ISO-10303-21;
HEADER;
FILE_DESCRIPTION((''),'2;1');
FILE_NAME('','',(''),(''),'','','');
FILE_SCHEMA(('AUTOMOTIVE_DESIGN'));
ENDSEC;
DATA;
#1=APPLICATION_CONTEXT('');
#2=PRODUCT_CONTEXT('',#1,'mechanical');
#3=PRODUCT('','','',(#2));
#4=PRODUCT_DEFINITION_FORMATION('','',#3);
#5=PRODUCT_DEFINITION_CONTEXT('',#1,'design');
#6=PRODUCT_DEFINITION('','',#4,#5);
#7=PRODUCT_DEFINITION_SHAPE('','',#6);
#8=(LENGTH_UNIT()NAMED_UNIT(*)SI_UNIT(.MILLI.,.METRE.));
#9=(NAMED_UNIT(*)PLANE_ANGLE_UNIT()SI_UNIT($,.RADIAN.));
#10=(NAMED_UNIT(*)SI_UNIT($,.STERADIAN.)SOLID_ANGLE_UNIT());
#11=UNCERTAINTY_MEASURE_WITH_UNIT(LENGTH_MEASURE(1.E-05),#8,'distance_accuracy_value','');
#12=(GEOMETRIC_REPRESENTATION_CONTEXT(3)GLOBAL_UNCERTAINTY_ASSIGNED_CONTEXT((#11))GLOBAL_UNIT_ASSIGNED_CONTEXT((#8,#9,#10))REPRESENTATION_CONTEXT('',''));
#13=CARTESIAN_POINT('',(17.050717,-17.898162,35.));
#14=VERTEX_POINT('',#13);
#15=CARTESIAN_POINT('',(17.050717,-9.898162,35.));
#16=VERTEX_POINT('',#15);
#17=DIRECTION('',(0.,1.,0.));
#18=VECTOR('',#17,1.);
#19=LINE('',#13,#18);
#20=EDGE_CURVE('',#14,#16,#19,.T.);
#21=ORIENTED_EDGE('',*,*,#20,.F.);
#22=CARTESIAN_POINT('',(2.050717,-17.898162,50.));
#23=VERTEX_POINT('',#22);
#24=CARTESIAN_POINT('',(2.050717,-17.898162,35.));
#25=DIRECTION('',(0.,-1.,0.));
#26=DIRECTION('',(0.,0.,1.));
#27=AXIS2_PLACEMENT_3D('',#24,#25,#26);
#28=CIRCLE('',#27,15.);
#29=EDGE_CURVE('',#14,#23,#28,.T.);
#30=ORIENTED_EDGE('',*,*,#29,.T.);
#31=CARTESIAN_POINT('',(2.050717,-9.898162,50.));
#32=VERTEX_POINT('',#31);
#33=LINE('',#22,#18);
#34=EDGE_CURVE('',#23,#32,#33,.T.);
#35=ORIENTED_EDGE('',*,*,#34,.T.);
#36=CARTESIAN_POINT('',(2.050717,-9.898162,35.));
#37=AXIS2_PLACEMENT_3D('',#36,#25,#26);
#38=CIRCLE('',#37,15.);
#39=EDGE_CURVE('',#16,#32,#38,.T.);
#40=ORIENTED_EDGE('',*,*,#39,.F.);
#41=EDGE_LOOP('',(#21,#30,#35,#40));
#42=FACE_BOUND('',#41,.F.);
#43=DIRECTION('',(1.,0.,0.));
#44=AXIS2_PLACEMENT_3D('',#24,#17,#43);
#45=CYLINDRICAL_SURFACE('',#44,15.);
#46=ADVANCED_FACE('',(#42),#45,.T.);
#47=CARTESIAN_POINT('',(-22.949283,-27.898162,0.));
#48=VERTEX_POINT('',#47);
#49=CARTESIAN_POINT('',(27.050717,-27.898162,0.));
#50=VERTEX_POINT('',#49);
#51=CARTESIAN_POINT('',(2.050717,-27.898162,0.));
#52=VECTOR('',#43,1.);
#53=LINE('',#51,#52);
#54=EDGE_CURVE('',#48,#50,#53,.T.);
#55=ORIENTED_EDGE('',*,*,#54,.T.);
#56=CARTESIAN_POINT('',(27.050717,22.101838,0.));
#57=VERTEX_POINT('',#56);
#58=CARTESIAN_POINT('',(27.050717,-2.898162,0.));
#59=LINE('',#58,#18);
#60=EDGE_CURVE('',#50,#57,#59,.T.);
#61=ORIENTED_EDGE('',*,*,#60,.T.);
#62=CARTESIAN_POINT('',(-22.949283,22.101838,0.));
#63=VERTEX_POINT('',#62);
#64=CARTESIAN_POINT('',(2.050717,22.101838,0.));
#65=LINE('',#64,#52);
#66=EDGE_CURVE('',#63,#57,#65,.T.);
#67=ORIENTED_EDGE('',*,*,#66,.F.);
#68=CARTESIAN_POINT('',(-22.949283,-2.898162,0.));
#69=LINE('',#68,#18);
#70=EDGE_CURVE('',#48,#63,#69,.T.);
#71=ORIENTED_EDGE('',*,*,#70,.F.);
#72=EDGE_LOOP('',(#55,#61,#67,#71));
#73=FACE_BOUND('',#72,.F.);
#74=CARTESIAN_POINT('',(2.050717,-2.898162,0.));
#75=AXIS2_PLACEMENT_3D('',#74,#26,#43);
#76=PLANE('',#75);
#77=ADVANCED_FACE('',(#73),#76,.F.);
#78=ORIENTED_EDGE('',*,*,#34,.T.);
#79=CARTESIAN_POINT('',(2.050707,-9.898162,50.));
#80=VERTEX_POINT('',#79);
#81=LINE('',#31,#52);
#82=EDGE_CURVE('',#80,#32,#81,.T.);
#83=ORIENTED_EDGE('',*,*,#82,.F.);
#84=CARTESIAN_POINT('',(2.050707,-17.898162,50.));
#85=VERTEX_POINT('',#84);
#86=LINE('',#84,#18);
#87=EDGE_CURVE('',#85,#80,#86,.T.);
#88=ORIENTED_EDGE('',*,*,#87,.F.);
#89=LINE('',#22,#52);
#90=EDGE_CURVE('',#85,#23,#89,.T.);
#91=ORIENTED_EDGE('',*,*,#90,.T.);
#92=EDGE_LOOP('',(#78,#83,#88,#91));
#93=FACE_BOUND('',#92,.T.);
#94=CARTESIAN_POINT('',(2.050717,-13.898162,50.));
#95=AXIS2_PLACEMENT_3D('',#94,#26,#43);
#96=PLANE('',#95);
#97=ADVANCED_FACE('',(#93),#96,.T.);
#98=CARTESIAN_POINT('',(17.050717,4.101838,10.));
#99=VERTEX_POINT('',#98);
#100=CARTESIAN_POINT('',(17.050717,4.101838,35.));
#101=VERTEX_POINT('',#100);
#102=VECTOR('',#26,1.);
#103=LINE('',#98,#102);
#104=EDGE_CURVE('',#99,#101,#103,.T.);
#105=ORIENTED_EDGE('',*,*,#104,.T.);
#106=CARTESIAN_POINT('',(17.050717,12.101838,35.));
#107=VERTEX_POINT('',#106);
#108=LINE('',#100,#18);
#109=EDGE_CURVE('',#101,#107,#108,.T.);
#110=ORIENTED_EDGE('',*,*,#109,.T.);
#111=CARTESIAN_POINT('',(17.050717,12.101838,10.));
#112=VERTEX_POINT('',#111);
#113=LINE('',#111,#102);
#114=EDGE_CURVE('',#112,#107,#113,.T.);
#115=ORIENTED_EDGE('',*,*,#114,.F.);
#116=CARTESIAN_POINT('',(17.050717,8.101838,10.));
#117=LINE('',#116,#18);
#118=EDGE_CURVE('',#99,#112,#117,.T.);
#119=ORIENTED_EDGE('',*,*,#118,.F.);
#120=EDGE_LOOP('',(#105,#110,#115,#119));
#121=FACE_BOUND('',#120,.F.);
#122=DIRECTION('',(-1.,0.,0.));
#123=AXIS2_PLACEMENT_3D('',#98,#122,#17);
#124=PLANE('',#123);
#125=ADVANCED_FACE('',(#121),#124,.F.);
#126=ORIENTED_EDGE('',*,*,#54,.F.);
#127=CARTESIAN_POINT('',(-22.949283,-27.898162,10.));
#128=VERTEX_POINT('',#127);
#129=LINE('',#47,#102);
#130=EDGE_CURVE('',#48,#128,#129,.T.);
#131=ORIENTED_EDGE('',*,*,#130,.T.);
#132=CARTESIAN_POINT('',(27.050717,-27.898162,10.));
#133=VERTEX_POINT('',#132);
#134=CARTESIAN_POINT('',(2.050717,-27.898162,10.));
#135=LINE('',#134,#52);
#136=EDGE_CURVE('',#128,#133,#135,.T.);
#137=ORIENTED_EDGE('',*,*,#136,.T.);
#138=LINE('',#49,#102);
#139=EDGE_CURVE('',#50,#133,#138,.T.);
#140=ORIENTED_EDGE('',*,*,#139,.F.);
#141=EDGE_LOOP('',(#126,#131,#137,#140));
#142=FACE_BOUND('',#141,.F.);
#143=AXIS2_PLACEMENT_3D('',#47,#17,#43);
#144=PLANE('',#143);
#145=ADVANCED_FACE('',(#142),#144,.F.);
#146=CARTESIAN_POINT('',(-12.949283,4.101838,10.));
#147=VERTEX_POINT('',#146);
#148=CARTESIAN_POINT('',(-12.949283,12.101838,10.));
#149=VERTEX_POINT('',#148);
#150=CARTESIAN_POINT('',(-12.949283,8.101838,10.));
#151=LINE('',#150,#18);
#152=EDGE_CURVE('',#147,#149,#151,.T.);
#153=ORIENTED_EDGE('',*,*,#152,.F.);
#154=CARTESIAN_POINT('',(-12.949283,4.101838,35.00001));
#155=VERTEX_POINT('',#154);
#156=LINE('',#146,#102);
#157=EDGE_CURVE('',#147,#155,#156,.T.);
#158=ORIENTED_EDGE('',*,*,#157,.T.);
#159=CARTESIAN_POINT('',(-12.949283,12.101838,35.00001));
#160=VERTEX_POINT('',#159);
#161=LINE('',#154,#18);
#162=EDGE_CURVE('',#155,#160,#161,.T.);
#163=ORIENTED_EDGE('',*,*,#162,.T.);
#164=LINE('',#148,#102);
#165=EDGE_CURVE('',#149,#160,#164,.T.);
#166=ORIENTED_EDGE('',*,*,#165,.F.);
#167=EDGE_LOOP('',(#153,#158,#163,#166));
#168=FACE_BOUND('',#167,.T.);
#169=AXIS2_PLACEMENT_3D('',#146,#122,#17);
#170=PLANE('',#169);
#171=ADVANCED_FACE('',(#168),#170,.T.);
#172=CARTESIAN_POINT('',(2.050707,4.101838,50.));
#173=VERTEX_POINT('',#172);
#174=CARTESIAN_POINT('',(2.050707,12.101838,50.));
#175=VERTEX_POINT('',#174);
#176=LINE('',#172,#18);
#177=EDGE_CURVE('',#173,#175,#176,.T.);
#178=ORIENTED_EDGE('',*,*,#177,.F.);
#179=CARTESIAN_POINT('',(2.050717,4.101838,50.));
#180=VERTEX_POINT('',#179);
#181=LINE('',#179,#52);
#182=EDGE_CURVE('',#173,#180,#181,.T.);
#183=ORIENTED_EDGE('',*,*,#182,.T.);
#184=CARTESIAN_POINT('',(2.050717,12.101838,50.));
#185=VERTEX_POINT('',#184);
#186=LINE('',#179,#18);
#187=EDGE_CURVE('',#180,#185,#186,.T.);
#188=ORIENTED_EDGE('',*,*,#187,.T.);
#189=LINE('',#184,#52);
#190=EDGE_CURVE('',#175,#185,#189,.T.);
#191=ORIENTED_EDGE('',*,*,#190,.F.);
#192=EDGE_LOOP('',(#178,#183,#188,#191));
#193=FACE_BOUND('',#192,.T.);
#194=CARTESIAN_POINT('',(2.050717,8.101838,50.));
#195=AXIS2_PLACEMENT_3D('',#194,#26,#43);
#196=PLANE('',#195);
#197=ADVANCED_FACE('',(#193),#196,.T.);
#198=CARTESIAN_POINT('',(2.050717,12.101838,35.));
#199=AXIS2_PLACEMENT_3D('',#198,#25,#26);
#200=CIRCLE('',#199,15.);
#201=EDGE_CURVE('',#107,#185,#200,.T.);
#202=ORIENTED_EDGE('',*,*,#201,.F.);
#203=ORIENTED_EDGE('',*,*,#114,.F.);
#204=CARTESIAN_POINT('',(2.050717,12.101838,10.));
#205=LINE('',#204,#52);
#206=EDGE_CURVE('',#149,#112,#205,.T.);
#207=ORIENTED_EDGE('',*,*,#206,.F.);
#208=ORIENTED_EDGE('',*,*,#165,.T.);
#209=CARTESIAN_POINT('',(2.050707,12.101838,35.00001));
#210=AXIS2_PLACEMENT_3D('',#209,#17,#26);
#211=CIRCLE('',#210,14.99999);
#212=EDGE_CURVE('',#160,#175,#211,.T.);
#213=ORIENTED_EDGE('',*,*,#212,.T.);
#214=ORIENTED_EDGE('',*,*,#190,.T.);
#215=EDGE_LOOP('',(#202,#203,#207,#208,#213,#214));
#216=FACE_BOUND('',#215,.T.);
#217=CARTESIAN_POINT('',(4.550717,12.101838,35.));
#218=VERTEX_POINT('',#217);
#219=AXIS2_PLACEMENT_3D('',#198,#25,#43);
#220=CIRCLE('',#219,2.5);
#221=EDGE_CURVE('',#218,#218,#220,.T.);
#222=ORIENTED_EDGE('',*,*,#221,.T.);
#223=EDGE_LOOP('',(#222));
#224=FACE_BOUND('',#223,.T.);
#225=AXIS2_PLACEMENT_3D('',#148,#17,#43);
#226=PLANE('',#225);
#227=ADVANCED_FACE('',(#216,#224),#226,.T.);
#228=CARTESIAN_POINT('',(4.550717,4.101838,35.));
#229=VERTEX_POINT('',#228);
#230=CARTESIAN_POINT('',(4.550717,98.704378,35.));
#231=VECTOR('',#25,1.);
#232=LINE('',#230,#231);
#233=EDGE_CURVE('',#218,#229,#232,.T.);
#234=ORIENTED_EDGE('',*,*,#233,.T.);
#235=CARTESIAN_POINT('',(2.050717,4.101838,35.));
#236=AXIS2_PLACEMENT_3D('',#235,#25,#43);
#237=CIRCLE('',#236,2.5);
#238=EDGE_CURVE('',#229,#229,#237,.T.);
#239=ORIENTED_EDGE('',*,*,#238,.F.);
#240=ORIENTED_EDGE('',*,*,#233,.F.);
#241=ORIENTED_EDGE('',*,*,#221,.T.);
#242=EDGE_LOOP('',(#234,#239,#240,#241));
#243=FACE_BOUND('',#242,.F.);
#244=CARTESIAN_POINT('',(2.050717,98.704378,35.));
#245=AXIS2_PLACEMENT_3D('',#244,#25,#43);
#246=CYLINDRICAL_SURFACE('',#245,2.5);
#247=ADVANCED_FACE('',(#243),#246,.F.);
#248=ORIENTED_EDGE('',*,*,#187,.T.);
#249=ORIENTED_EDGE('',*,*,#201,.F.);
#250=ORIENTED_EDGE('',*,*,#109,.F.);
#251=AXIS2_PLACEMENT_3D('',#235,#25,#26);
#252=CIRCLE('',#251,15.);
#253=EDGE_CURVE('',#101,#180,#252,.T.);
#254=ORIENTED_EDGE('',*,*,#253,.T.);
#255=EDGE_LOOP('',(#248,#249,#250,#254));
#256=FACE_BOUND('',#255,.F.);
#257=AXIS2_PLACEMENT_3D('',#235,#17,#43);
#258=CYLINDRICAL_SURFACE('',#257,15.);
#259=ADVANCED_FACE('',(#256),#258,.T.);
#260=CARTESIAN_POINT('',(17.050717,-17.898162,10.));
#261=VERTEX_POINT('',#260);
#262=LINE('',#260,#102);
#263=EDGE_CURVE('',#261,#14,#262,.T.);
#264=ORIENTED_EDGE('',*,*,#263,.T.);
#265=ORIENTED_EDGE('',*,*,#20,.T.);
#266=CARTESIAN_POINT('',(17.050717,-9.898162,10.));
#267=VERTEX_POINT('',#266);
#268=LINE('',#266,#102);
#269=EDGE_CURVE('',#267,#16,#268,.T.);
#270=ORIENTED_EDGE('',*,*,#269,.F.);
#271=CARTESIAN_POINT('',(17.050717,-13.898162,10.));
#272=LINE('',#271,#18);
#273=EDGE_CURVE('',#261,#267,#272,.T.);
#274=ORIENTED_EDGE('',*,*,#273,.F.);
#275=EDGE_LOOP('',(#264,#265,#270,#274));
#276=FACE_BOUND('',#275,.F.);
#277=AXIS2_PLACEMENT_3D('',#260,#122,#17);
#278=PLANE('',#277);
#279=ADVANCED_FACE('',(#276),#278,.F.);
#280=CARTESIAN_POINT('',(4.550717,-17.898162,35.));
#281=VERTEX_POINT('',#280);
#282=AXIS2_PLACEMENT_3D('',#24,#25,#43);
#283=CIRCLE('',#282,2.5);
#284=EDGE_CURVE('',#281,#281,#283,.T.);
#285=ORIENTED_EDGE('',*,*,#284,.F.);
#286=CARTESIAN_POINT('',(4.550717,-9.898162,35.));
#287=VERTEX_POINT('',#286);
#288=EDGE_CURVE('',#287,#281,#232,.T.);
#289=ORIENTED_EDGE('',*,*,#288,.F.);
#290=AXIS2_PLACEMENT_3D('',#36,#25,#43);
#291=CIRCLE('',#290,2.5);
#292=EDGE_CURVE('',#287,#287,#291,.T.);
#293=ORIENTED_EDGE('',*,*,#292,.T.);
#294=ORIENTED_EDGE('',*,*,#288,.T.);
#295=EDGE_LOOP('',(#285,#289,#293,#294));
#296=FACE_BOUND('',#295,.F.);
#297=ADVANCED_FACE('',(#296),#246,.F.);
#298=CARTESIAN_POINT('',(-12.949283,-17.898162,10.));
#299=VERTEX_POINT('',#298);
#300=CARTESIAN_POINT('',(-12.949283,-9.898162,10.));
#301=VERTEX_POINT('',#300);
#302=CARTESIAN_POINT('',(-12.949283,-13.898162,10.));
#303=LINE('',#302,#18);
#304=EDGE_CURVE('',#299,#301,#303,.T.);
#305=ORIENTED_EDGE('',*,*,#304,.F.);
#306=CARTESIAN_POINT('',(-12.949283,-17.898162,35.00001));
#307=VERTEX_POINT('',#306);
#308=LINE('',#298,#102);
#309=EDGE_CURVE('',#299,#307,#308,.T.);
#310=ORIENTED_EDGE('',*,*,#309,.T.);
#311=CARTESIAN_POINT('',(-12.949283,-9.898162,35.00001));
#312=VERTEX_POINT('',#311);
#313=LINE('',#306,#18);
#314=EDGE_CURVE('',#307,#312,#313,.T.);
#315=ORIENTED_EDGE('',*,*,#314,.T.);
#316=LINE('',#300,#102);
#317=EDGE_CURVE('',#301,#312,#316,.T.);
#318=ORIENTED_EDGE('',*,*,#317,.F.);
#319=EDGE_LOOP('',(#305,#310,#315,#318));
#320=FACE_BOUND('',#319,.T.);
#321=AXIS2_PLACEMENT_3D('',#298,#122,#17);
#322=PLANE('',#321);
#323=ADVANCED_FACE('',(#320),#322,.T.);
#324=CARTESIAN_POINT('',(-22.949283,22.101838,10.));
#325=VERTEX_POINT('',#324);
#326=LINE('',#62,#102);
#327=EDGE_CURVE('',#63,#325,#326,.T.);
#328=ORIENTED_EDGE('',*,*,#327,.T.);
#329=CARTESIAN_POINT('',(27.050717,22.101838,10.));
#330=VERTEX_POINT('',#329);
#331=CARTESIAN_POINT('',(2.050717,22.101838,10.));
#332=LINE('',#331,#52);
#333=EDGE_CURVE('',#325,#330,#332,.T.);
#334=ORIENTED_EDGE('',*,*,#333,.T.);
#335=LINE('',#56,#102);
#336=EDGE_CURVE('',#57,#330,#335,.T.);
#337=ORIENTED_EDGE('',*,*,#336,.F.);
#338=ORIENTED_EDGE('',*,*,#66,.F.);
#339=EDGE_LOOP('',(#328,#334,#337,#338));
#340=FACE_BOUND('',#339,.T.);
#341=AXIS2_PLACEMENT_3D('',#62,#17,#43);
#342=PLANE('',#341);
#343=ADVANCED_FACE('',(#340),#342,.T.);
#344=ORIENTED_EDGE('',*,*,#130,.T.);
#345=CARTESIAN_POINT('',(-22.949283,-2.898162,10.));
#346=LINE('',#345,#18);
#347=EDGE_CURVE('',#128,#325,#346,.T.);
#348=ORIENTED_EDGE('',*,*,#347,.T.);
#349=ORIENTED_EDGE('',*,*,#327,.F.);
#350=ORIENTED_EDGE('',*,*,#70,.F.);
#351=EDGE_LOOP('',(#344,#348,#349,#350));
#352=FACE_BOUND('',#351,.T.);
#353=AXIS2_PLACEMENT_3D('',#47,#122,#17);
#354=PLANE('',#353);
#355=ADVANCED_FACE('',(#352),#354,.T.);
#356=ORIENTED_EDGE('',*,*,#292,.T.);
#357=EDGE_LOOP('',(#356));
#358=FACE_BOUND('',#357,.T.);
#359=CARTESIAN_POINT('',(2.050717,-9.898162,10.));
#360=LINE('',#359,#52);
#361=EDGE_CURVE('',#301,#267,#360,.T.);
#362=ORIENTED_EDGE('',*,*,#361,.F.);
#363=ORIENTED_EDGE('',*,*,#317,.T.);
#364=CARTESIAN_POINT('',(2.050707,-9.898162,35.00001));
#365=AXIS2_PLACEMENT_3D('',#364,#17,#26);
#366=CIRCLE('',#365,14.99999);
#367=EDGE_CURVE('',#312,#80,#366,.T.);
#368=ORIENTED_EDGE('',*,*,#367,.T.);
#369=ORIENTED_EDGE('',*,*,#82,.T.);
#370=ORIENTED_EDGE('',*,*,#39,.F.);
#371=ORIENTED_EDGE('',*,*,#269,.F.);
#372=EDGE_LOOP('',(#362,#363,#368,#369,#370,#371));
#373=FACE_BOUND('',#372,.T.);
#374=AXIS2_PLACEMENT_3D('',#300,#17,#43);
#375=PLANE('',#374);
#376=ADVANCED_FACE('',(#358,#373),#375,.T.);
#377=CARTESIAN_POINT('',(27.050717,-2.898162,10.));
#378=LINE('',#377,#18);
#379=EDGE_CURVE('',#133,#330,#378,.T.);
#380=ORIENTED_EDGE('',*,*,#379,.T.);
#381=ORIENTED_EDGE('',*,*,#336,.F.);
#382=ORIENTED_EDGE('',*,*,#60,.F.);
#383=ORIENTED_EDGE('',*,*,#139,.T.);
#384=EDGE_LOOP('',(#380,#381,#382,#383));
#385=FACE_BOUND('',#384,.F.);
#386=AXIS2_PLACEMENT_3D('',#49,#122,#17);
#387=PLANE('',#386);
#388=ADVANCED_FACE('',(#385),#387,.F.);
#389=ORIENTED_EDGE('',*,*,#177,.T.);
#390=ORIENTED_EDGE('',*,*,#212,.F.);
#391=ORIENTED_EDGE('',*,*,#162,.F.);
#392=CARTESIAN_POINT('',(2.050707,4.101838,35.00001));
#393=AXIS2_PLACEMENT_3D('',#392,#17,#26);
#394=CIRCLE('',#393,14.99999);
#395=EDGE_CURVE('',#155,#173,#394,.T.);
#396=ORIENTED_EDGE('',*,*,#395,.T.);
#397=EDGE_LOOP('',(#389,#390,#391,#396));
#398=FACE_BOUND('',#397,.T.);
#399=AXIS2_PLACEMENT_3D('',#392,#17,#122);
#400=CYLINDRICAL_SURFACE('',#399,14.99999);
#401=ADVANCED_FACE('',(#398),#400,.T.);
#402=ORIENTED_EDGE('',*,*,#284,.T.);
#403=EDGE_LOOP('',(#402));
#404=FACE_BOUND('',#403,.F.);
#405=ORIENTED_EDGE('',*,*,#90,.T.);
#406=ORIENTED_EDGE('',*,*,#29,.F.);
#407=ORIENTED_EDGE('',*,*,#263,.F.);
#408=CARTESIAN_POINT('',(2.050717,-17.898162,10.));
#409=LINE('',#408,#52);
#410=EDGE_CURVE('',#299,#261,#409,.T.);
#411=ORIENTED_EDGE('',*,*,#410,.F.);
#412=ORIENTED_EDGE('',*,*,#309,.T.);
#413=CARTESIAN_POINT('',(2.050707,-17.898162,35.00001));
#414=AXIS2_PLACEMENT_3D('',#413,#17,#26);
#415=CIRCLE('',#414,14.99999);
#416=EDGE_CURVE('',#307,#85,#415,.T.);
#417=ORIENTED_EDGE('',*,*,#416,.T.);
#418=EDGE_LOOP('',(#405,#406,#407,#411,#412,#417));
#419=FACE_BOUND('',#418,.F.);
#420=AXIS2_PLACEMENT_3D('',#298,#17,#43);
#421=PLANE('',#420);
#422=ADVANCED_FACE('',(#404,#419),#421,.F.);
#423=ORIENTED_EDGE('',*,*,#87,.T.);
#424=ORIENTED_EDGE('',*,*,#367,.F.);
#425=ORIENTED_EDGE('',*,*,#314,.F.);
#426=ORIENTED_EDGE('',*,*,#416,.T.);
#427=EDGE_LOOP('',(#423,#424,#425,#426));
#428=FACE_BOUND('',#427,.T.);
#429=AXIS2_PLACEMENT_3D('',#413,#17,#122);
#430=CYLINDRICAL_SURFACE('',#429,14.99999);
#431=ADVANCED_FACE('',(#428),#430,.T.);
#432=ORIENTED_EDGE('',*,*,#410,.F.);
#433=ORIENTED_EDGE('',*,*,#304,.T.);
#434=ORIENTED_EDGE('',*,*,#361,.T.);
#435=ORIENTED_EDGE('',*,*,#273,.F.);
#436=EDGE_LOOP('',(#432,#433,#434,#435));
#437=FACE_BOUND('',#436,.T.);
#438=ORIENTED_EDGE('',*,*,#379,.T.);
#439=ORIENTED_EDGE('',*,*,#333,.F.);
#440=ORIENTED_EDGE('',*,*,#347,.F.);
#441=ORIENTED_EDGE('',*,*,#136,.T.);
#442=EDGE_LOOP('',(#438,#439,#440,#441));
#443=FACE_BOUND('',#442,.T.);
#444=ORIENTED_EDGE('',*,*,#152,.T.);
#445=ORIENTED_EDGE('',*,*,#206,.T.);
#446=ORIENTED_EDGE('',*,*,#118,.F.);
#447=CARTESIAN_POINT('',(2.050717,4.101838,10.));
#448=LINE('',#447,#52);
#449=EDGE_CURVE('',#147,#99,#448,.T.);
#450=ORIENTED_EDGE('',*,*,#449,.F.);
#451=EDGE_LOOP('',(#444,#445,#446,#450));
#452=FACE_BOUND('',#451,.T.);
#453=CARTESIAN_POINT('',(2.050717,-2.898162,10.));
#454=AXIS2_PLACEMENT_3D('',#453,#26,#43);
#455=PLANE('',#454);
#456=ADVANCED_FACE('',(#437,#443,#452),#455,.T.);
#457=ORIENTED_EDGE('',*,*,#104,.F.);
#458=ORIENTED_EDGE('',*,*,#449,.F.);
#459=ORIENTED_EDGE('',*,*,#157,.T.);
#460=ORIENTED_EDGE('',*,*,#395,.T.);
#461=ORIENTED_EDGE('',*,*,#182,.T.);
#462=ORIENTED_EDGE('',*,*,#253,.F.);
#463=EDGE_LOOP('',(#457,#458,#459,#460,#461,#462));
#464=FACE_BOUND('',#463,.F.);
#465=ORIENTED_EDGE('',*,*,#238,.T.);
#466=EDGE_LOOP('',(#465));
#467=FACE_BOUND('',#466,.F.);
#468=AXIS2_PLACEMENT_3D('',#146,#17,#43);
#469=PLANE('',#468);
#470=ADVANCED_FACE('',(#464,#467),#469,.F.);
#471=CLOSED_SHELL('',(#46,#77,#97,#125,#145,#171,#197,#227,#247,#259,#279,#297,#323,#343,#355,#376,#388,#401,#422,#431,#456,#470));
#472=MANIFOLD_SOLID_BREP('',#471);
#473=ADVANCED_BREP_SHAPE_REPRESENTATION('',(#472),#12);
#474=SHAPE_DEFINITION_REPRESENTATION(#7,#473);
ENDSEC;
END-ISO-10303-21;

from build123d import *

# Parameters (mm, degrees)
F0_W     = 50
F0_H     = 50
F1_DEPTH = 10
F2_W     = 30
F2_H     = 8
F4_DEPTH = 40
F3_W     = 30
F3_H     = 8
F5_DEPTH = 40
F6_R     = 15
F7_R     = 15
F8_R     = 14.99999
F9_R     = 14.99999
F11_D    = 5


# Not quite as in the source:
# - a fillet or chamfer is up to 0.001 mm smaller than in the source, because OpenCascade refuses the exact size


with BuildPart() as f1:
    # F0 (on Top) → F1 (new body)
    with BuildSketch(Plane.XY):
        with Locations((2.0507174658, -2.8981622308)):
            Rectangle(F0_W, F0_H)
    extrude(amount=F1_DEPTH)

    # F2 (on face) → F4 (join)
    with BuildSketch(Plane.XY.offset(10)):
        with Locations((2.0507174658, 8.1018377692)):
            Rectangle(F2_W, F2_H)
    extrude(amount=F4_DEPTH)

    # F3 (on face) → F5 (join)
    with BuildSketch(Plane.XY.offset(10)):
        with Locations((2.0507174658, -13.8981622308)):
            Rectangle(F3_W, F3_H)
    extrude(amount=F5_DEPTH)

    # F6
    f6_edges = [f1.edges().sort_by_distance(p)[0] for p in [
        (17.050717, 8.101838, 50),
    ]]
    fillet(f6_edges, radius=F6_R)

    # F7
    f7_edges = [f1.edges().sort_by_distance(p)[0] for p in [
        (17.050717, -13.898162, 50),
    ]]
    fillet(f7_edges, radius=F7_R)

    # F8 (radius 15 in the source; OpenCascade refuses exactly that, so slightly less here)
    f8_edges = [f1.edges().sort_by_distance(p)[0] for p in [
        (-12.949283, 8.101838, 50),
    ]]
    fillet(f8_edges, radius=F8_R)

    # F9 (radius 15 in the source; OpenCascade refuses exactly that, so slightly less here)
    f9_edges = [f1.edges().sort_by_distance(p)[0] for p in [
        (-12.949283, -13.898162, 50),
    ]]
    fillet(f9_edges, radius=F9_R)

    # F11 (through all)
    with Locations(Plane(origin=(0, 12.1018377692, 0), x_dir=(-1, 0, 0), z_dir=(0, 1, 0))):
        with Locations((-2.0507174658, 35)):
            Hole(F11_D / 2)


solid = f1.part
